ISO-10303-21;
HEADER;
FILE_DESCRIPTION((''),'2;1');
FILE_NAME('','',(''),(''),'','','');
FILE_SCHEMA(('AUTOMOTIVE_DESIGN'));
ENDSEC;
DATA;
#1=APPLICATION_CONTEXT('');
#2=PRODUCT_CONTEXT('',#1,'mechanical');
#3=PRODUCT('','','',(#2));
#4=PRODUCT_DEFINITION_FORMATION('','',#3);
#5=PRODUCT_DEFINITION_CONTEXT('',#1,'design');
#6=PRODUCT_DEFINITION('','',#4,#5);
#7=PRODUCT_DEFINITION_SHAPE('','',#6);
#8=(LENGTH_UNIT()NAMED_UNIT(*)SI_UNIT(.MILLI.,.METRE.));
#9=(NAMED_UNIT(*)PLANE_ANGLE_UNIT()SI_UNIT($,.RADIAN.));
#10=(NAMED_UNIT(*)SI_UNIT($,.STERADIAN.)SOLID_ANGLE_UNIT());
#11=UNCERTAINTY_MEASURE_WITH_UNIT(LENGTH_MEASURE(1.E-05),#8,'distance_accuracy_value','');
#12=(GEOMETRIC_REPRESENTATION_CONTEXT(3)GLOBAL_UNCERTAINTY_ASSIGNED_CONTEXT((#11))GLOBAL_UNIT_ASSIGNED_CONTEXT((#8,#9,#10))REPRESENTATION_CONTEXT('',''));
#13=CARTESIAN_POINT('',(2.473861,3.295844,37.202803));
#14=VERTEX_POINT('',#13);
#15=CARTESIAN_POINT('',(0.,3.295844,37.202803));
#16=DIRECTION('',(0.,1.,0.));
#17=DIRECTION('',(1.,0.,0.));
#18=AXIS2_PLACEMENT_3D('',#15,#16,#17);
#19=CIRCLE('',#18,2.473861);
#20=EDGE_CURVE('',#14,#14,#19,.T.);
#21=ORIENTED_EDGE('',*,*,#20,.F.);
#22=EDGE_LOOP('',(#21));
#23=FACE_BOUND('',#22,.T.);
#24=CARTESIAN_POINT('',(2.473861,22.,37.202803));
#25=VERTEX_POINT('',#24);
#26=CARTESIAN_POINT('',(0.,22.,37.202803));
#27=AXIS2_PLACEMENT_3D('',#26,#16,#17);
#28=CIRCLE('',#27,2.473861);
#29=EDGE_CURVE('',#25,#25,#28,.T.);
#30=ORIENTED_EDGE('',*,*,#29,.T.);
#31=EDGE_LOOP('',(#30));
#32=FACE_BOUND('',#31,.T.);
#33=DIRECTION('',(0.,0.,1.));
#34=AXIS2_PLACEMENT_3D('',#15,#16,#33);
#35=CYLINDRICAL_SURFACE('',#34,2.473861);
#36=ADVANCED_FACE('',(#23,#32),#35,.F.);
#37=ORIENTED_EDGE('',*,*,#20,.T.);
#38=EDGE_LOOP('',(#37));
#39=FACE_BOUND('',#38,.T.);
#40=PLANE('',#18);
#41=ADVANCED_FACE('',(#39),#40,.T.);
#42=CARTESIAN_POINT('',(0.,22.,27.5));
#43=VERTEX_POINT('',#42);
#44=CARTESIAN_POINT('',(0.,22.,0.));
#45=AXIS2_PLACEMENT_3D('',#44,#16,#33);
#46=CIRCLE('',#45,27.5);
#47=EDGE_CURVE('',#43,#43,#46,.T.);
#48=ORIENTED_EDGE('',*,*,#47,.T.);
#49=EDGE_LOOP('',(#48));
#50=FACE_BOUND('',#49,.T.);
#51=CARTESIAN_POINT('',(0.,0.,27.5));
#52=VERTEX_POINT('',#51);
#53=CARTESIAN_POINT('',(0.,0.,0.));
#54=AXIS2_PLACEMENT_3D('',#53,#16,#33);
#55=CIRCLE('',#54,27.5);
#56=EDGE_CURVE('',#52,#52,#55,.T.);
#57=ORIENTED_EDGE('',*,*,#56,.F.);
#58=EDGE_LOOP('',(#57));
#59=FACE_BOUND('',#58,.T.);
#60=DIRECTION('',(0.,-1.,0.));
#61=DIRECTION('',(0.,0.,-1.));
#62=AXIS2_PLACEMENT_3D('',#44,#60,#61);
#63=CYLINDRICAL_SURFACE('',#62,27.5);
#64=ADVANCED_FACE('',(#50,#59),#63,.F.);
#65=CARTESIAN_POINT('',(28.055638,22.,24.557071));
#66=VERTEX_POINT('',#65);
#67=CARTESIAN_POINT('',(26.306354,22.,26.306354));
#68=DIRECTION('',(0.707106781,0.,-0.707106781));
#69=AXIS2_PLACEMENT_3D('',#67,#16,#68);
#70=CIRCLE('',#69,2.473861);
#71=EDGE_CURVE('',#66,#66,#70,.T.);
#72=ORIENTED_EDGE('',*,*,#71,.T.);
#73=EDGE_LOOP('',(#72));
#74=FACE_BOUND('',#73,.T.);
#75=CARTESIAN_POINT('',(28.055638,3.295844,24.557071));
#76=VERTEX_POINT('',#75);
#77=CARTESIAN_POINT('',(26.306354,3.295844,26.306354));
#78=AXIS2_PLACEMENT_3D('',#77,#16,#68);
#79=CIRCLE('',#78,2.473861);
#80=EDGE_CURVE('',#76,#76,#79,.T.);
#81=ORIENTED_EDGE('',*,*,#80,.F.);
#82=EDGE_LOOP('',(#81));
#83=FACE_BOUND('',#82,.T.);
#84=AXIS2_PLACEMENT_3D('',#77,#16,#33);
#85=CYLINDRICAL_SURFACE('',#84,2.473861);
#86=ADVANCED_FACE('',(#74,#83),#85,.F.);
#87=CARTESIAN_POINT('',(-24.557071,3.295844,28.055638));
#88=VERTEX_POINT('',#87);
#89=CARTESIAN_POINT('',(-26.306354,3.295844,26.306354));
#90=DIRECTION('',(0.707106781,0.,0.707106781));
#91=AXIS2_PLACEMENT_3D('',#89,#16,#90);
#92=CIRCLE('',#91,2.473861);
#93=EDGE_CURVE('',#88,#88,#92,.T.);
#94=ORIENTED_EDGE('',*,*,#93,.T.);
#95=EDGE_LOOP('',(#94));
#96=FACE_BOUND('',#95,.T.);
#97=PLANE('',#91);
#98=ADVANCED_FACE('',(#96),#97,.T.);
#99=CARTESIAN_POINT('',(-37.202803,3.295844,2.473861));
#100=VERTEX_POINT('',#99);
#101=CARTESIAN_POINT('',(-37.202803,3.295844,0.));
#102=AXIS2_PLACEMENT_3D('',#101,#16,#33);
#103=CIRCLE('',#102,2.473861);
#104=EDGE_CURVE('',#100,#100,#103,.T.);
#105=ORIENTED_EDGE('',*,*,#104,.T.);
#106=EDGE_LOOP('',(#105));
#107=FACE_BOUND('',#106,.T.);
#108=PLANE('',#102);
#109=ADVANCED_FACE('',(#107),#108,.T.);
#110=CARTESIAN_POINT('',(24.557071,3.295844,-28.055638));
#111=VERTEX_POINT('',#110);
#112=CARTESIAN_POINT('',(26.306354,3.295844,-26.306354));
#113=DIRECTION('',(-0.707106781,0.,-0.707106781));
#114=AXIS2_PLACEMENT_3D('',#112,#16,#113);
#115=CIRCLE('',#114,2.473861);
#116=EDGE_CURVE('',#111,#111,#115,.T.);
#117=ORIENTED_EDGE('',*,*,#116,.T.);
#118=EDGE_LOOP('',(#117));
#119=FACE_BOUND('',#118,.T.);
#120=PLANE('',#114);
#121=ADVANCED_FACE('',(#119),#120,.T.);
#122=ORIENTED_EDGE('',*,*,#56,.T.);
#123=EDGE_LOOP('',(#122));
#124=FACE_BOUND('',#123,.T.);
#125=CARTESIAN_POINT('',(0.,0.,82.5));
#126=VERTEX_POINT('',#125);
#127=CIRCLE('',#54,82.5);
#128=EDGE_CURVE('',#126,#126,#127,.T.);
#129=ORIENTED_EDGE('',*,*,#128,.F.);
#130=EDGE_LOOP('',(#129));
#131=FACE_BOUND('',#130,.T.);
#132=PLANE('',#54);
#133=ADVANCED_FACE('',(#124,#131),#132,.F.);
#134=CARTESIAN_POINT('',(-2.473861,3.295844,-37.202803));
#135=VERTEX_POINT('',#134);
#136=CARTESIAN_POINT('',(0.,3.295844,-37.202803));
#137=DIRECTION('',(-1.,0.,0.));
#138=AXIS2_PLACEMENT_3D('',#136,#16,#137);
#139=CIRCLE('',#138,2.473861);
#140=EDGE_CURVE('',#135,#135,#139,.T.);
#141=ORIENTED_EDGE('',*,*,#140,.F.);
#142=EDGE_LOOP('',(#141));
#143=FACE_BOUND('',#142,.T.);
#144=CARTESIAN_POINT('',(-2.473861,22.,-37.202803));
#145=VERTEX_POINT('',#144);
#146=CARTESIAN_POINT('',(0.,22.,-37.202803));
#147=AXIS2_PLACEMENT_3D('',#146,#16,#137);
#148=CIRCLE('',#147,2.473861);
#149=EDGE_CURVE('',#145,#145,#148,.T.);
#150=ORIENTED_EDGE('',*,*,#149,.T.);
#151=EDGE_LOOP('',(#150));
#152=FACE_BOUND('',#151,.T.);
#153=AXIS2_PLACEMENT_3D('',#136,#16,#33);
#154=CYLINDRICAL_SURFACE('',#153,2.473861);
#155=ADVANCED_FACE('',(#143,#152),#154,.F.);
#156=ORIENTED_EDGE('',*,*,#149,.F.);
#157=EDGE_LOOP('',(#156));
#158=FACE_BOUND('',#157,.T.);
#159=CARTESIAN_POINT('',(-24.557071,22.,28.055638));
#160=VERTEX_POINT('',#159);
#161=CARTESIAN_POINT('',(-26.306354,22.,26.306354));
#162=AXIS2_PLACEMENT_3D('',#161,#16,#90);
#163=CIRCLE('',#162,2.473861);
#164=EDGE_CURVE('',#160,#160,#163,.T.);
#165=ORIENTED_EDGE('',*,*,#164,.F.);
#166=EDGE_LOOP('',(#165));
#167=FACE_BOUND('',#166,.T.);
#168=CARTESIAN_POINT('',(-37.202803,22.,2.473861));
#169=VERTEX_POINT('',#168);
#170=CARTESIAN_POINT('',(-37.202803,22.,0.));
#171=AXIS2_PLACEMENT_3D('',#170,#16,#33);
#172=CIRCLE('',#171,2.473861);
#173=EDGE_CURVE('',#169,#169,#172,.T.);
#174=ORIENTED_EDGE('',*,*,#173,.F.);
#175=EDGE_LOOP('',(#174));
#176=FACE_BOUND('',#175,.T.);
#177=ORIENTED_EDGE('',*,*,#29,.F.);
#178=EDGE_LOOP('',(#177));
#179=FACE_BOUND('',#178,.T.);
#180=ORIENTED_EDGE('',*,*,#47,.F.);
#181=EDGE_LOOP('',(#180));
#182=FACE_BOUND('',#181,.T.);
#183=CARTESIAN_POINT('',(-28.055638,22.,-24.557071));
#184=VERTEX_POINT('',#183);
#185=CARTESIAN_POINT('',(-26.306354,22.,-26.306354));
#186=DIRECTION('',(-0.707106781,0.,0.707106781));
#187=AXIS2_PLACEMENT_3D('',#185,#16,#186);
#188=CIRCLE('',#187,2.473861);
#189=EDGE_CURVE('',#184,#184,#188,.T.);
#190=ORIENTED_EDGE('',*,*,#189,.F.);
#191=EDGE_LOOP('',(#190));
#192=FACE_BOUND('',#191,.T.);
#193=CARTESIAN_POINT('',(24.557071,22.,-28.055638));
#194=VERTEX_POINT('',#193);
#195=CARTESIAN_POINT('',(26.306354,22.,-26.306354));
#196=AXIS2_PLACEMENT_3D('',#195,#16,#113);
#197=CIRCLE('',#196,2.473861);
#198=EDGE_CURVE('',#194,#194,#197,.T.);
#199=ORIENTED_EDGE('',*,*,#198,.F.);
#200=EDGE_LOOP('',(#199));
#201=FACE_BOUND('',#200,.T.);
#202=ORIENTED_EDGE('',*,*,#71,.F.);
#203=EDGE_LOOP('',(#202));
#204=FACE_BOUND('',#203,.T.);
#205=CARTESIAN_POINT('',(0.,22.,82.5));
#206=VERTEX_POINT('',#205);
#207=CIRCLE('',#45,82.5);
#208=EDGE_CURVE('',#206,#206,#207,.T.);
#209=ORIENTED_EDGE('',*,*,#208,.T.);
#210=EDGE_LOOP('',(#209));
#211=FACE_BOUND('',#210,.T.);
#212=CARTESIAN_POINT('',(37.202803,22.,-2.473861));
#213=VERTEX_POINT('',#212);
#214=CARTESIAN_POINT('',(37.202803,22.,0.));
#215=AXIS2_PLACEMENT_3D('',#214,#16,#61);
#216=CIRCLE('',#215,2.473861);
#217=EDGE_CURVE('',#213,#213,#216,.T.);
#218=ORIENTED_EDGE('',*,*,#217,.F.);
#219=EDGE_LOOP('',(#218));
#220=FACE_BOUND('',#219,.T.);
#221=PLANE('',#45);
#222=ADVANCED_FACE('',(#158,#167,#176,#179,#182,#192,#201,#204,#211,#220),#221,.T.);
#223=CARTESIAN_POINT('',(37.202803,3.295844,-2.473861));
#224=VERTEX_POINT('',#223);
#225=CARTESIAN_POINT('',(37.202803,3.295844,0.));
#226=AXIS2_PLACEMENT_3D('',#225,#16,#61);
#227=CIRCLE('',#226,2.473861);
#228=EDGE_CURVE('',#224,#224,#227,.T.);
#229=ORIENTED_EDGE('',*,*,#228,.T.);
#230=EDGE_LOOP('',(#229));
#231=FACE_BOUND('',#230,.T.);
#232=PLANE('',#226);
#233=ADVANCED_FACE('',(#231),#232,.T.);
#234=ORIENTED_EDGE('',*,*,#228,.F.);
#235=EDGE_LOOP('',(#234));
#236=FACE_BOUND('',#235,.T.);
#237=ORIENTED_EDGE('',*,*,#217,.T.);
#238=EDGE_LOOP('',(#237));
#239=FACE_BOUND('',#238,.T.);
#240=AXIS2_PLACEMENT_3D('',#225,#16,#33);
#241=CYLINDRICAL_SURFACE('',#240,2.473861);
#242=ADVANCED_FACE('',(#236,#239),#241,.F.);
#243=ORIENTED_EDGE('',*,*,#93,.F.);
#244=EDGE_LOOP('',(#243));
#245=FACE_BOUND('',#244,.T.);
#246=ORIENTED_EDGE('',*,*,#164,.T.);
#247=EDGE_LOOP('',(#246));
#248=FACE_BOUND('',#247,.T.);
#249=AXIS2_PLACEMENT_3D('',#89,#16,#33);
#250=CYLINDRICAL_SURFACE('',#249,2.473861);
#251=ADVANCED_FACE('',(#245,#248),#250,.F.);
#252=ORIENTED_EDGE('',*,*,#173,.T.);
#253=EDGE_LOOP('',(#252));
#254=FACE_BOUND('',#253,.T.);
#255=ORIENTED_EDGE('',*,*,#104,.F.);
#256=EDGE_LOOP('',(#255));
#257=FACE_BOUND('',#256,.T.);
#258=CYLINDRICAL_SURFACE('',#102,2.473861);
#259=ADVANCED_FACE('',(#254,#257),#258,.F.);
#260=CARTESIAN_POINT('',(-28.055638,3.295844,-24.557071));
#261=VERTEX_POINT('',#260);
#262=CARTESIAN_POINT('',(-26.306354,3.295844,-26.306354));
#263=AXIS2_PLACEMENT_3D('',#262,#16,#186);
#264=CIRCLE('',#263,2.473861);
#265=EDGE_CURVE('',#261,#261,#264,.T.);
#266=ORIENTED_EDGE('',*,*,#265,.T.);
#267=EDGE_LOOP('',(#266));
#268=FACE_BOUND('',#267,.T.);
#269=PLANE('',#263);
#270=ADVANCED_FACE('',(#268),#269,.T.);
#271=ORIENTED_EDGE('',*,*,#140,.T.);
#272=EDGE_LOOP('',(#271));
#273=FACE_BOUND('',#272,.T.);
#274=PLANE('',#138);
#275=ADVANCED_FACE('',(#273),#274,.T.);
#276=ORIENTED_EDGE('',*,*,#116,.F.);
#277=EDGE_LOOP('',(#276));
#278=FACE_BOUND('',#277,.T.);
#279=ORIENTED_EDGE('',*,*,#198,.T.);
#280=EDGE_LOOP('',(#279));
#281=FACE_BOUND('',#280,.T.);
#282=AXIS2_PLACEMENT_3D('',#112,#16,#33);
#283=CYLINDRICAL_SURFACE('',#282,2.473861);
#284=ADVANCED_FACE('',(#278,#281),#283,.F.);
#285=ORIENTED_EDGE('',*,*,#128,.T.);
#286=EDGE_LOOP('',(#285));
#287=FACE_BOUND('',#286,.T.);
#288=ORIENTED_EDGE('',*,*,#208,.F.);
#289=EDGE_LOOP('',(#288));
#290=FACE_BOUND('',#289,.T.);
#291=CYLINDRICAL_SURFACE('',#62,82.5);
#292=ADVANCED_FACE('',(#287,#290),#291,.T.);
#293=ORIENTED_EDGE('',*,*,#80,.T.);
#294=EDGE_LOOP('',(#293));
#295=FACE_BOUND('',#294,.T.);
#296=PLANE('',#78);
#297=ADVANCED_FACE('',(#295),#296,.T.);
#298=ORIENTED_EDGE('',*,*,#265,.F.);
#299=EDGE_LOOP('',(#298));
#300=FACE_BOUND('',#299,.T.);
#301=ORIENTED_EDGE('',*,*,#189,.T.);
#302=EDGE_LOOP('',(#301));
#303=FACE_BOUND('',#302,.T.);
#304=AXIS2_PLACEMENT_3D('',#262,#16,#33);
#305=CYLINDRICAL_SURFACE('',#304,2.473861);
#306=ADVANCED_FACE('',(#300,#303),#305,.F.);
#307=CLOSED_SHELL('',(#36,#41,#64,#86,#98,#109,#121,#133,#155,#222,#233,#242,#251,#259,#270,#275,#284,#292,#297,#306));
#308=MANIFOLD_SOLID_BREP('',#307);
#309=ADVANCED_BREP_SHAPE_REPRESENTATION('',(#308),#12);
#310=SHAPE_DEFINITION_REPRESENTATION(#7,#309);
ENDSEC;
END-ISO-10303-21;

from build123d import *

# Parameters (mm, degrees)
SKETCH1_R           = 82.5
BOSS_EXTRUDE1_DEPTH = 22
SKETCH2_R           = 27.5
CUT_EXTRUDE1_DEPTH  = 119.728682297
SKETCH3_R           = 2.473860502
CUT_EXTRUDE2_DEPTH  = 18.704156355
CIRPATTERN1_COUNT   = 8


with BuildPart() as part:
    # Sketch1 → Boss-Extrude1 (new body)
    with BuildSketch(Plane(origin=(0, 0, 0), x_dir=(1, 0, 0), z_dir=(0, 1, 0))):
        Circle(SKETCH1_R)
    extrude(amount=BOSS_EXTRUDE1_DEPTH)

    # Sketch2 → Cut-Extrude1 (cut, through all)
    with BuildSketch(Plane(origin=(0, 0, 0), x_dir=(1, 0, 0), z_dir=(0, 1, 0))):
        Circle(SKETCH2_R)
    extrude(amount=CUT_EXTRUDE1_DEPTH, mode=Mode.SUBTRACT)

    # Sketch3 → Cut-Extrude2 (cut)
    with BuildSketch(Plane(origin=(0, 22, 0), x_dir=(1, 0, 0), z_dir=(0, 1, 0))):
        with Locations((-37.202802875, 0)):
            Circle(SKETCH3_R)
    cut_extrude2 = extrude(amount=-CUT_EXTRUDE2_DEPTH, mode=Mode.SUBTRACT)

    # CirPattern1: Cut-Extrude2 ×8 about axis
    cirpattern1_axis = Axis((0, 0, 0), (0, 1, 0))
    for i in range(1, CIRPATTERN1_COUNT):
        add(cut_extrude2.rotate(cirpattern1_axis, i * 360 / CIRPATTERN1_COUNT), mode=Mode.SUBTRACT)


solid = part.part
